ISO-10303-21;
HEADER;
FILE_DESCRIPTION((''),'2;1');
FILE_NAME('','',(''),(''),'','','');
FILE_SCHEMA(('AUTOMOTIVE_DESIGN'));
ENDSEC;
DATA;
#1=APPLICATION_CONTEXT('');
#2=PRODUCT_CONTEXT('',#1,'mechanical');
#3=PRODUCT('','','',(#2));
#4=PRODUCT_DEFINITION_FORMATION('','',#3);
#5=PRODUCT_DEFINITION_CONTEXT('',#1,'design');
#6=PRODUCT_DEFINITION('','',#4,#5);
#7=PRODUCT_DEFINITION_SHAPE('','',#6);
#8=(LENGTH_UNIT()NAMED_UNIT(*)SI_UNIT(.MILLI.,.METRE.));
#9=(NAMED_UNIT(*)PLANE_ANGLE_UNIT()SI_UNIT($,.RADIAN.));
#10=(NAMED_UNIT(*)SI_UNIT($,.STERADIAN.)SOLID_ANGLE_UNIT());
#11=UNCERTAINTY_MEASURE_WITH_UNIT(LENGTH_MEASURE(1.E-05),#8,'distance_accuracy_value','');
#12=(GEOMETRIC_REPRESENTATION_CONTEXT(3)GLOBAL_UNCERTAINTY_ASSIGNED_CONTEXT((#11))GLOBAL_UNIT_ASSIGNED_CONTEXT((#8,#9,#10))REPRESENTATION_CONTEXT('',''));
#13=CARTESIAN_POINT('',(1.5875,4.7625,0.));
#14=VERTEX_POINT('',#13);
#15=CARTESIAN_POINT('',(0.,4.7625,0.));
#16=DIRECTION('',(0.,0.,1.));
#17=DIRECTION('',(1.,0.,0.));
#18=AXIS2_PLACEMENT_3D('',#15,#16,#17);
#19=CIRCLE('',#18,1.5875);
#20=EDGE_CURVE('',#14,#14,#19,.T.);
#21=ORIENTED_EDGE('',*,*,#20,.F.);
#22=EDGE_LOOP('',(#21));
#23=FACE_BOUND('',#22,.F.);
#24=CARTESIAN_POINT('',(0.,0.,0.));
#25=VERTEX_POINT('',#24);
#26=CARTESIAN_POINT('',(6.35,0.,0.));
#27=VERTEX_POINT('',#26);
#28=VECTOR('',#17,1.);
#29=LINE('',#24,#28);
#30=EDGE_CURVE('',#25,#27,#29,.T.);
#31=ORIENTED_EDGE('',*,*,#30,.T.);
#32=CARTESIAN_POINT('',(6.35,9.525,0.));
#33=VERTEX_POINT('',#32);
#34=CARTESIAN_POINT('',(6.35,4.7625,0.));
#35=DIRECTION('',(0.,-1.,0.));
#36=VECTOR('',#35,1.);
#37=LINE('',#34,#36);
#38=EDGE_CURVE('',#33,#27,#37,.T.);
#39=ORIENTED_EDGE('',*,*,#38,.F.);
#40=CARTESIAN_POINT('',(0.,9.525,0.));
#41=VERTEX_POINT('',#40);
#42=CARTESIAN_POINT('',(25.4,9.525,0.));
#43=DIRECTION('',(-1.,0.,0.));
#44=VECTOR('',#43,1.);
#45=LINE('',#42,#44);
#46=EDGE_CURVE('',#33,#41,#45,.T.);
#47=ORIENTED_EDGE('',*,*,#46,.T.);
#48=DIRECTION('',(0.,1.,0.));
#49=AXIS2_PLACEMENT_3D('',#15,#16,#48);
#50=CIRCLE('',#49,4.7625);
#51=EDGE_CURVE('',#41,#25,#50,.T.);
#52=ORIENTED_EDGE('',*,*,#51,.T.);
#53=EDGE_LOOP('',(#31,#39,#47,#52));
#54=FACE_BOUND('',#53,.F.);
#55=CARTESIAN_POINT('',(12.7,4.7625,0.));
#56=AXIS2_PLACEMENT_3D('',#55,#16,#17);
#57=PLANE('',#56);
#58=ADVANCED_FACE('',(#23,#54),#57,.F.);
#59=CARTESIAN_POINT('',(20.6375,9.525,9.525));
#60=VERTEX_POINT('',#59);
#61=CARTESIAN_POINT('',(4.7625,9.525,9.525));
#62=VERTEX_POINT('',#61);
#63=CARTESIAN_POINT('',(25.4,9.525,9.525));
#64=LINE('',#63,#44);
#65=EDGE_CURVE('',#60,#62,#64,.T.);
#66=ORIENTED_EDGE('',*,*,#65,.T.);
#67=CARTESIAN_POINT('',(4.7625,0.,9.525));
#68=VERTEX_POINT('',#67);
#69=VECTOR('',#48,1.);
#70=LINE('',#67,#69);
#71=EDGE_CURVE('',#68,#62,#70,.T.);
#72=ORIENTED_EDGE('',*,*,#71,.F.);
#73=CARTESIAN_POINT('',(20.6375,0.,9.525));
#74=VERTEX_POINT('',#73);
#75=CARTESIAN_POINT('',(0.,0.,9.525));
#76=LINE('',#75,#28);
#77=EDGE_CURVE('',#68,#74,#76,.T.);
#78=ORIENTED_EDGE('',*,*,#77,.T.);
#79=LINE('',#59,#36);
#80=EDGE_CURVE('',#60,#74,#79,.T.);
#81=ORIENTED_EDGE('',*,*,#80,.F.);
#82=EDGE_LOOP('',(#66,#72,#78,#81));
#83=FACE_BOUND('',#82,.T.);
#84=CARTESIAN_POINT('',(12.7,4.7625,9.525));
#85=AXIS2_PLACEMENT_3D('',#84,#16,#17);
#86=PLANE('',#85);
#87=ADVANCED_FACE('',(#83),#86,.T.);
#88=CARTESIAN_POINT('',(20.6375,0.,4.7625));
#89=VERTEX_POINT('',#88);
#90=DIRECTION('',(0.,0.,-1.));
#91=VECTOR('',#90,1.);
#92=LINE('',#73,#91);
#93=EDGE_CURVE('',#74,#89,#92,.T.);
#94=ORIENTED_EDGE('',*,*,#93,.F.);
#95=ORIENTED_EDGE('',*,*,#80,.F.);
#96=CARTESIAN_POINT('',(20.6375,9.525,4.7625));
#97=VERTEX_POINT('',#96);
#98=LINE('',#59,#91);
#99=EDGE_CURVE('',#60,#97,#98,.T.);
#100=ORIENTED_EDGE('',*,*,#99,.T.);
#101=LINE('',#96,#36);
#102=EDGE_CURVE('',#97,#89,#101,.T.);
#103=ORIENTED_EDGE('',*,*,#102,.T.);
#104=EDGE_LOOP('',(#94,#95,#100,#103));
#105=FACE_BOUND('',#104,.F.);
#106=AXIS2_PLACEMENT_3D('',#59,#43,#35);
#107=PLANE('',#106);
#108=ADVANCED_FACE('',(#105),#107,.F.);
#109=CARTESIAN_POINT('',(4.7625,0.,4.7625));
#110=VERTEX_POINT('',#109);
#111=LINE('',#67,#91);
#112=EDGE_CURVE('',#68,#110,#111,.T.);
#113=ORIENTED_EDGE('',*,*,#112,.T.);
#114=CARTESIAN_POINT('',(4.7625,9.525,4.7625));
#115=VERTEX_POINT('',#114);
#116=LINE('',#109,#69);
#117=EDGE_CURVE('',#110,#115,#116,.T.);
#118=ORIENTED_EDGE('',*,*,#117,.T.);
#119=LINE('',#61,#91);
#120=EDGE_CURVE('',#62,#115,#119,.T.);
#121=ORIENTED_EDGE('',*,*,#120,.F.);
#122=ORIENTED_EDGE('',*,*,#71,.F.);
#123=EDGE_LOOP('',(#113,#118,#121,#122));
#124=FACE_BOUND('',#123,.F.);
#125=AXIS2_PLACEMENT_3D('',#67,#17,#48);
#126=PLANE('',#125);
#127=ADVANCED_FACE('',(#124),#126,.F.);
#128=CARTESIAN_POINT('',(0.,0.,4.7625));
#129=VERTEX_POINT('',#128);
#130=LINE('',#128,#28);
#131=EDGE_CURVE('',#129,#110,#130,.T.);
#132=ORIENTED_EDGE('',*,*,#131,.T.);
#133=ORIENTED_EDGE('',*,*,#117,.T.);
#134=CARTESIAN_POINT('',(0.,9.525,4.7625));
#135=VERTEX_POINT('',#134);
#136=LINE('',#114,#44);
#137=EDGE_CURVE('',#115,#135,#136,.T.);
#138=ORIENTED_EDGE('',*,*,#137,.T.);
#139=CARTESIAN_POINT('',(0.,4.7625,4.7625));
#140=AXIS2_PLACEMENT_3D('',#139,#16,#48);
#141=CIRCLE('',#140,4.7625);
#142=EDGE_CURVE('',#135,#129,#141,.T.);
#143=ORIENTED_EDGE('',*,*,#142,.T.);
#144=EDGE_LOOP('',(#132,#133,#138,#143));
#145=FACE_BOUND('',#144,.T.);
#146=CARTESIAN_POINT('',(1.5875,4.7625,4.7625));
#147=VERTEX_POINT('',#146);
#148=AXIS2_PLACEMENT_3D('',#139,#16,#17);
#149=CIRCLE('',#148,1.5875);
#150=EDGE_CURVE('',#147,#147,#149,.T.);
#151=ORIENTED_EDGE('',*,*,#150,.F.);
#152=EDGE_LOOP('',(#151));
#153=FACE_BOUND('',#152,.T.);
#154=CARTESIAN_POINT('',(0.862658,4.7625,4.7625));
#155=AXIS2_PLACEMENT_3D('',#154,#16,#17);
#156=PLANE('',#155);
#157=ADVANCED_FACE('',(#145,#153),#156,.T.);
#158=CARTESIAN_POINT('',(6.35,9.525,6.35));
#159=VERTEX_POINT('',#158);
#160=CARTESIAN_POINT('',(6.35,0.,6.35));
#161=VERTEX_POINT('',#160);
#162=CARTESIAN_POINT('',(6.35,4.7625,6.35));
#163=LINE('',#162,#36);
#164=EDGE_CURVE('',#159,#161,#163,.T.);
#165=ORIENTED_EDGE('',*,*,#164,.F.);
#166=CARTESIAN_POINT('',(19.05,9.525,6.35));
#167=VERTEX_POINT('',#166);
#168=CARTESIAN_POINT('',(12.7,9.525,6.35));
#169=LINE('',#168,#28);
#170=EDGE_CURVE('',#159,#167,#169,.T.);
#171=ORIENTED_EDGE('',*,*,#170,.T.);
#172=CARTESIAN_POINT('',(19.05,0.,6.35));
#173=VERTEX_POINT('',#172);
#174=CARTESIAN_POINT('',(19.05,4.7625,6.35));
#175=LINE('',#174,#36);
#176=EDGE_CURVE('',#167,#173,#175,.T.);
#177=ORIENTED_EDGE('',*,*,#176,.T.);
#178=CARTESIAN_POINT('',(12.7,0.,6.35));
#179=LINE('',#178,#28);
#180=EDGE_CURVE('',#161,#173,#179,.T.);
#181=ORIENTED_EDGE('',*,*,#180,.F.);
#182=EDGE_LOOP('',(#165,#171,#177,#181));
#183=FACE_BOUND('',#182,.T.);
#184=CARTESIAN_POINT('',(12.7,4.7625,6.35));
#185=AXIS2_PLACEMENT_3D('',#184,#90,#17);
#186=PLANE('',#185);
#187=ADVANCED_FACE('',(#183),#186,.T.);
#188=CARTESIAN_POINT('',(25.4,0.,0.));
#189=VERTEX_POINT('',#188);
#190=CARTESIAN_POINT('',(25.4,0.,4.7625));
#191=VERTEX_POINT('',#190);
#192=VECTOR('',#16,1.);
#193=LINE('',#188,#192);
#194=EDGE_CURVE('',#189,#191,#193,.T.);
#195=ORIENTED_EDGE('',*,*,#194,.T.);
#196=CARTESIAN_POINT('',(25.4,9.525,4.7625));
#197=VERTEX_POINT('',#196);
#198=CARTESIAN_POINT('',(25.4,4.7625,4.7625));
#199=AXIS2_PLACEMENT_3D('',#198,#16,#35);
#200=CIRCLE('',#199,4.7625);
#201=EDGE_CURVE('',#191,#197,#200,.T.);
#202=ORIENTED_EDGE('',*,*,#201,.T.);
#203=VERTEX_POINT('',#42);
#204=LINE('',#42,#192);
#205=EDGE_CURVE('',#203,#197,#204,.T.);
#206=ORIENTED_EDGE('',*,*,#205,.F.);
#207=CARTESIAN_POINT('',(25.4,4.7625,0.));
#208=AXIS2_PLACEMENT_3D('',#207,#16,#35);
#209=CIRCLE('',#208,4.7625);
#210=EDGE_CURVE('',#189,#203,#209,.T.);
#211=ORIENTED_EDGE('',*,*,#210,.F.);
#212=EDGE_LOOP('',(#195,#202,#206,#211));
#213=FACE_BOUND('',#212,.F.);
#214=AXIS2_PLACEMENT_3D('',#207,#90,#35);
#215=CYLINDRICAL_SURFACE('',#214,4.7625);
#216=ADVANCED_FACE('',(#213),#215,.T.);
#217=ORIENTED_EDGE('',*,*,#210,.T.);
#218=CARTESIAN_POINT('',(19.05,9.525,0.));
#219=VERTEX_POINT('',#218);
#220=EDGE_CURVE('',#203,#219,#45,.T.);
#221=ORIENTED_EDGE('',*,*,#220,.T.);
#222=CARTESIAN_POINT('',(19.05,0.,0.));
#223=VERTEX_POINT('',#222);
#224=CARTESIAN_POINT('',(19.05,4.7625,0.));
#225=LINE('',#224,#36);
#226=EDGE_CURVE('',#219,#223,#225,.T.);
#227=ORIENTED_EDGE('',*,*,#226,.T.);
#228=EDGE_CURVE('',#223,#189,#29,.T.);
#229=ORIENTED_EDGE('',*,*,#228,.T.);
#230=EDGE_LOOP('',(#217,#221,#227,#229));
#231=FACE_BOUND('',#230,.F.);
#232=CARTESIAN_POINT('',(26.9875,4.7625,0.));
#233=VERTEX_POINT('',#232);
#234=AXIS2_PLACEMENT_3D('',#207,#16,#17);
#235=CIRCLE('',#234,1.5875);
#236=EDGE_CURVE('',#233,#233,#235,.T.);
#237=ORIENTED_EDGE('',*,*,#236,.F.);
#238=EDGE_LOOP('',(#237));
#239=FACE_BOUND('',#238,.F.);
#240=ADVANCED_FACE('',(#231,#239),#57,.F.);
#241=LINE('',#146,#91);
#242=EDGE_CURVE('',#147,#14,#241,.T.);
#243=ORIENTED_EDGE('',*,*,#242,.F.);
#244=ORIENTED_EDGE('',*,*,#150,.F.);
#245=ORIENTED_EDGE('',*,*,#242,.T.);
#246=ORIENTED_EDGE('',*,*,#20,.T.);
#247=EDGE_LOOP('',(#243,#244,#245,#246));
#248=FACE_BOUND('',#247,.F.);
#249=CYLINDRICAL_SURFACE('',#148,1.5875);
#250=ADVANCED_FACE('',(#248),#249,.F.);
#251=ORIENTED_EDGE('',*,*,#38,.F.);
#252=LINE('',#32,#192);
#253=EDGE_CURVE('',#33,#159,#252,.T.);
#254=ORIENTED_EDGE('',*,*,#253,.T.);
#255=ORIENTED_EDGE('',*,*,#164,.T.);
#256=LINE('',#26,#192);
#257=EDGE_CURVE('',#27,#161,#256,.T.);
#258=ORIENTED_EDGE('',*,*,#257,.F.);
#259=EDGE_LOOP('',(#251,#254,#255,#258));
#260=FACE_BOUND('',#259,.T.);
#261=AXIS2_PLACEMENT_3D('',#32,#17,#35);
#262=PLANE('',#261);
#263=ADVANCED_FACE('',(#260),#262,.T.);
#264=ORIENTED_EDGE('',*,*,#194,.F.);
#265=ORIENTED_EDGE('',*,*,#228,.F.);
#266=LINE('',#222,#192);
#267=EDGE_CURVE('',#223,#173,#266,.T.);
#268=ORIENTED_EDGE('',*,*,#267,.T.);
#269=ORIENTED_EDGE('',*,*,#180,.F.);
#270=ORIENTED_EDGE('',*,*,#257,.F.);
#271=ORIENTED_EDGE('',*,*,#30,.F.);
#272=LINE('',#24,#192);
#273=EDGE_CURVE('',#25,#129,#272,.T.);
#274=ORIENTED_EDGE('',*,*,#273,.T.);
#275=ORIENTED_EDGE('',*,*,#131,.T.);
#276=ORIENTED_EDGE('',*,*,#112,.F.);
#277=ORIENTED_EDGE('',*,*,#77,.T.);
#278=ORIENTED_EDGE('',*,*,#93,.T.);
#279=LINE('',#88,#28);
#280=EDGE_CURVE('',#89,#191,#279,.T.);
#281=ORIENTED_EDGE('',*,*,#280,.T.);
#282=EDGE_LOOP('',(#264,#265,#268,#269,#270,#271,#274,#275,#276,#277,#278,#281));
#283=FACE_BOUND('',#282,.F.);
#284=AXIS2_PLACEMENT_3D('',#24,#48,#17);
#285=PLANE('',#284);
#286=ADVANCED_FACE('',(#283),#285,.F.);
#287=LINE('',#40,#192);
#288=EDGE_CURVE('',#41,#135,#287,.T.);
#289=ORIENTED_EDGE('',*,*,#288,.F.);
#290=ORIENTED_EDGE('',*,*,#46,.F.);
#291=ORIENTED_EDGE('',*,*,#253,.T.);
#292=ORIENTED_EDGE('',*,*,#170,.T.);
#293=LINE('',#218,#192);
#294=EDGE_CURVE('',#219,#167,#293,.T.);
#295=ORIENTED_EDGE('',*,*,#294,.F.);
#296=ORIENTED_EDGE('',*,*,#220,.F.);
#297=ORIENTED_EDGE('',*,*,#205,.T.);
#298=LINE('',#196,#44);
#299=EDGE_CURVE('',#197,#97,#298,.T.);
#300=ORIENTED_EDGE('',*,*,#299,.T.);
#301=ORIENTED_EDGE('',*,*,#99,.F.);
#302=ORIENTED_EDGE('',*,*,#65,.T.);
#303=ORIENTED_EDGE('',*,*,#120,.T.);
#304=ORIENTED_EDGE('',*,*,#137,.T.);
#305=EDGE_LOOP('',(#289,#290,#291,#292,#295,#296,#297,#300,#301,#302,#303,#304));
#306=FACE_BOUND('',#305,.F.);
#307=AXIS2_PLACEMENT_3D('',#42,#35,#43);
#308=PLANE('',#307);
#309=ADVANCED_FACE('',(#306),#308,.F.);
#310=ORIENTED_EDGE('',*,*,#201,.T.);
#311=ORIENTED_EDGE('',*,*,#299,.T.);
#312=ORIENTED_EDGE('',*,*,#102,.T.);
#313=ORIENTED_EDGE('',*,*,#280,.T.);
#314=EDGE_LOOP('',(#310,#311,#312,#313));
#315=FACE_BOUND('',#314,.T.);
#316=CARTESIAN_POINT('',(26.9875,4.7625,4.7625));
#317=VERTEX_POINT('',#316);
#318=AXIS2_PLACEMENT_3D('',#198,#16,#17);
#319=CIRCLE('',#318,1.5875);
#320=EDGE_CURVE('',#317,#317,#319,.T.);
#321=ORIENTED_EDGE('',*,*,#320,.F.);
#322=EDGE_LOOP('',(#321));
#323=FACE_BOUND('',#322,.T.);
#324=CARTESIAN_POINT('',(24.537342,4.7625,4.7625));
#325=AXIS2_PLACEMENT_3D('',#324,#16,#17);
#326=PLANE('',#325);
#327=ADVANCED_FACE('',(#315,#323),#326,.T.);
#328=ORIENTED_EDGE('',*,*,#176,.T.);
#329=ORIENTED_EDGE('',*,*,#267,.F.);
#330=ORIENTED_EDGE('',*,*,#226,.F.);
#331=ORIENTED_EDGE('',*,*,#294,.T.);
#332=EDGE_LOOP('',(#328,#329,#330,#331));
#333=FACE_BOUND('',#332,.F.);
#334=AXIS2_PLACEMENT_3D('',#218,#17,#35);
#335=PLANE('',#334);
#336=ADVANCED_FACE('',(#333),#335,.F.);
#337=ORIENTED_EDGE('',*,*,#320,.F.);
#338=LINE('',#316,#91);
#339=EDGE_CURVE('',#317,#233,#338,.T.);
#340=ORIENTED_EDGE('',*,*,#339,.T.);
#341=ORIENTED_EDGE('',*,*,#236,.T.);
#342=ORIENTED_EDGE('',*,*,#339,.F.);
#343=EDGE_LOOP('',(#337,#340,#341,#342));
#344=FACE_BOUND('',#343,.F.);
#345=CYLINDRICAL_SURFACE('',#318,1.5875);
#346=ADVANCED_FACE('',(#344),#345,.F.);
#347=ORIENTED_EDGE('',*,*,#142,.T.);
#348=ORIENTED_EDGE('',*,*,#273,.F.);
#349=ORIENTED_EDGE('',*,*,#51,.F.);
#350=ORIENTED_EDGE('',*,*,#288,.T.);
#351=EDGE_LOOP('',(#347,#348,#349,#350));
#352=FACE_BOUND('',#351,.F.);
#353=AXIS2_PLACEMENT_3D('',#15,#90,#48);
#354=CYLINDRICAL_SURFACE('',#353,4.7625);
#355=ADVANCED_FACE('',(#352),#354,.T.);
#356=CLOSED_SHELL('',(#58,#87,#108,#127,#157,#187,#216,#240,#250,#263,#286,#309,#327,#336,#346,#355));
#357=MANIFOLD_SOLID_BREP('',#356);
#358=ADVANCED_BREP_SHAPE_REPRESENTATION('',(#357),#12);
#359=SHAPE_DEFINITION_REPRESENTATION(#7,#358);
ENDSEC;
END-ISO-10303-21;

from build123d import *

# Parameters (mm, degrees)
F1_DEPTH = 9.525
F2_W     = 12.7
F2_H     = 9.525
F3_DEPTH = 6.35
F5_DEPTH = 4.7625
F7_R     = 1.5875
F6_R     = 1.5875
F8_DEPTH = 25.4


# Not quite as in the source:
# - a feature names something its author has since deleted; it is built from what else it names


with BuildPart() as f1:
    # F0 (on Top) → F1 (new body)
    with BuildSketch(Plane.XY):
        with BuildLine():
            ThreePointArc((0, 9.525), (-4.7625, 4.7625), (0, 0))
            Line((0, 0), (25.4, 0))
            ThreePointArc((25.4, 0), (30.1625, 4.7625), (25.4, 9.525))
            Line((25.4, 9.525), (0, 9.525))
        make_face()
    extrude(amount=F1_DEPTH)

    # F2 (on face) → F3 (cut)
    with BuildSketch(Plane(origin=(0, 0, 0), x_dir=(1, 0, 0), z_dir=(0, 0, -1))):
        with Locations((12.7, -4.7625)):
            Rectangle(F2_W, F2_H)
    extrude(amount=-F3_DEPTH, mode=Mode.SUBTRACT)

    # F4 (on face) → F5 (cut)
    with BuildSketch(Plane.XY.offset(9.525)):
        with BuildLine():
            Line((4.7625, 9.525), (0, 9.525))
            ThreePointArc((0, 9.525), (-4.7625, 4.7625), (0, 0))
            Line((0, 0), (4.7625, 0))
            Line((4.7625, 0), (4.7625, 9.525))
        make_face()
        with BuildLine():
            Line((25.4, 9.525), (20.6375, 9.525))
            Line((20.6375, 9.525), (20.6375, 0))
            Line((20.6375, 0), (25.4, 0))
            ThreePointArc((25.4, 0), (30.1625, 4.7625), (25.4, 9.525))
        make_face()
    extrude(amount=-F5_DEPTH, mode=Mode.SUBTRACT)

    # F7 (on face) + F6 (on face) → F8 (cut)
    with BuildSketch(Plane.XY.offset(4.7625)):
        with Locations((0, 4.7625)):
            Circle(F7_R)
    with BuildSketch(Plane.XY.offset(4.7625)):
        with Locations((25.4, 4.7625)):
            Circle(F6_R)
    extrude(amount=-F8_DEPTH, mode=Mode.SUBTRACT)


solid = f1.part
